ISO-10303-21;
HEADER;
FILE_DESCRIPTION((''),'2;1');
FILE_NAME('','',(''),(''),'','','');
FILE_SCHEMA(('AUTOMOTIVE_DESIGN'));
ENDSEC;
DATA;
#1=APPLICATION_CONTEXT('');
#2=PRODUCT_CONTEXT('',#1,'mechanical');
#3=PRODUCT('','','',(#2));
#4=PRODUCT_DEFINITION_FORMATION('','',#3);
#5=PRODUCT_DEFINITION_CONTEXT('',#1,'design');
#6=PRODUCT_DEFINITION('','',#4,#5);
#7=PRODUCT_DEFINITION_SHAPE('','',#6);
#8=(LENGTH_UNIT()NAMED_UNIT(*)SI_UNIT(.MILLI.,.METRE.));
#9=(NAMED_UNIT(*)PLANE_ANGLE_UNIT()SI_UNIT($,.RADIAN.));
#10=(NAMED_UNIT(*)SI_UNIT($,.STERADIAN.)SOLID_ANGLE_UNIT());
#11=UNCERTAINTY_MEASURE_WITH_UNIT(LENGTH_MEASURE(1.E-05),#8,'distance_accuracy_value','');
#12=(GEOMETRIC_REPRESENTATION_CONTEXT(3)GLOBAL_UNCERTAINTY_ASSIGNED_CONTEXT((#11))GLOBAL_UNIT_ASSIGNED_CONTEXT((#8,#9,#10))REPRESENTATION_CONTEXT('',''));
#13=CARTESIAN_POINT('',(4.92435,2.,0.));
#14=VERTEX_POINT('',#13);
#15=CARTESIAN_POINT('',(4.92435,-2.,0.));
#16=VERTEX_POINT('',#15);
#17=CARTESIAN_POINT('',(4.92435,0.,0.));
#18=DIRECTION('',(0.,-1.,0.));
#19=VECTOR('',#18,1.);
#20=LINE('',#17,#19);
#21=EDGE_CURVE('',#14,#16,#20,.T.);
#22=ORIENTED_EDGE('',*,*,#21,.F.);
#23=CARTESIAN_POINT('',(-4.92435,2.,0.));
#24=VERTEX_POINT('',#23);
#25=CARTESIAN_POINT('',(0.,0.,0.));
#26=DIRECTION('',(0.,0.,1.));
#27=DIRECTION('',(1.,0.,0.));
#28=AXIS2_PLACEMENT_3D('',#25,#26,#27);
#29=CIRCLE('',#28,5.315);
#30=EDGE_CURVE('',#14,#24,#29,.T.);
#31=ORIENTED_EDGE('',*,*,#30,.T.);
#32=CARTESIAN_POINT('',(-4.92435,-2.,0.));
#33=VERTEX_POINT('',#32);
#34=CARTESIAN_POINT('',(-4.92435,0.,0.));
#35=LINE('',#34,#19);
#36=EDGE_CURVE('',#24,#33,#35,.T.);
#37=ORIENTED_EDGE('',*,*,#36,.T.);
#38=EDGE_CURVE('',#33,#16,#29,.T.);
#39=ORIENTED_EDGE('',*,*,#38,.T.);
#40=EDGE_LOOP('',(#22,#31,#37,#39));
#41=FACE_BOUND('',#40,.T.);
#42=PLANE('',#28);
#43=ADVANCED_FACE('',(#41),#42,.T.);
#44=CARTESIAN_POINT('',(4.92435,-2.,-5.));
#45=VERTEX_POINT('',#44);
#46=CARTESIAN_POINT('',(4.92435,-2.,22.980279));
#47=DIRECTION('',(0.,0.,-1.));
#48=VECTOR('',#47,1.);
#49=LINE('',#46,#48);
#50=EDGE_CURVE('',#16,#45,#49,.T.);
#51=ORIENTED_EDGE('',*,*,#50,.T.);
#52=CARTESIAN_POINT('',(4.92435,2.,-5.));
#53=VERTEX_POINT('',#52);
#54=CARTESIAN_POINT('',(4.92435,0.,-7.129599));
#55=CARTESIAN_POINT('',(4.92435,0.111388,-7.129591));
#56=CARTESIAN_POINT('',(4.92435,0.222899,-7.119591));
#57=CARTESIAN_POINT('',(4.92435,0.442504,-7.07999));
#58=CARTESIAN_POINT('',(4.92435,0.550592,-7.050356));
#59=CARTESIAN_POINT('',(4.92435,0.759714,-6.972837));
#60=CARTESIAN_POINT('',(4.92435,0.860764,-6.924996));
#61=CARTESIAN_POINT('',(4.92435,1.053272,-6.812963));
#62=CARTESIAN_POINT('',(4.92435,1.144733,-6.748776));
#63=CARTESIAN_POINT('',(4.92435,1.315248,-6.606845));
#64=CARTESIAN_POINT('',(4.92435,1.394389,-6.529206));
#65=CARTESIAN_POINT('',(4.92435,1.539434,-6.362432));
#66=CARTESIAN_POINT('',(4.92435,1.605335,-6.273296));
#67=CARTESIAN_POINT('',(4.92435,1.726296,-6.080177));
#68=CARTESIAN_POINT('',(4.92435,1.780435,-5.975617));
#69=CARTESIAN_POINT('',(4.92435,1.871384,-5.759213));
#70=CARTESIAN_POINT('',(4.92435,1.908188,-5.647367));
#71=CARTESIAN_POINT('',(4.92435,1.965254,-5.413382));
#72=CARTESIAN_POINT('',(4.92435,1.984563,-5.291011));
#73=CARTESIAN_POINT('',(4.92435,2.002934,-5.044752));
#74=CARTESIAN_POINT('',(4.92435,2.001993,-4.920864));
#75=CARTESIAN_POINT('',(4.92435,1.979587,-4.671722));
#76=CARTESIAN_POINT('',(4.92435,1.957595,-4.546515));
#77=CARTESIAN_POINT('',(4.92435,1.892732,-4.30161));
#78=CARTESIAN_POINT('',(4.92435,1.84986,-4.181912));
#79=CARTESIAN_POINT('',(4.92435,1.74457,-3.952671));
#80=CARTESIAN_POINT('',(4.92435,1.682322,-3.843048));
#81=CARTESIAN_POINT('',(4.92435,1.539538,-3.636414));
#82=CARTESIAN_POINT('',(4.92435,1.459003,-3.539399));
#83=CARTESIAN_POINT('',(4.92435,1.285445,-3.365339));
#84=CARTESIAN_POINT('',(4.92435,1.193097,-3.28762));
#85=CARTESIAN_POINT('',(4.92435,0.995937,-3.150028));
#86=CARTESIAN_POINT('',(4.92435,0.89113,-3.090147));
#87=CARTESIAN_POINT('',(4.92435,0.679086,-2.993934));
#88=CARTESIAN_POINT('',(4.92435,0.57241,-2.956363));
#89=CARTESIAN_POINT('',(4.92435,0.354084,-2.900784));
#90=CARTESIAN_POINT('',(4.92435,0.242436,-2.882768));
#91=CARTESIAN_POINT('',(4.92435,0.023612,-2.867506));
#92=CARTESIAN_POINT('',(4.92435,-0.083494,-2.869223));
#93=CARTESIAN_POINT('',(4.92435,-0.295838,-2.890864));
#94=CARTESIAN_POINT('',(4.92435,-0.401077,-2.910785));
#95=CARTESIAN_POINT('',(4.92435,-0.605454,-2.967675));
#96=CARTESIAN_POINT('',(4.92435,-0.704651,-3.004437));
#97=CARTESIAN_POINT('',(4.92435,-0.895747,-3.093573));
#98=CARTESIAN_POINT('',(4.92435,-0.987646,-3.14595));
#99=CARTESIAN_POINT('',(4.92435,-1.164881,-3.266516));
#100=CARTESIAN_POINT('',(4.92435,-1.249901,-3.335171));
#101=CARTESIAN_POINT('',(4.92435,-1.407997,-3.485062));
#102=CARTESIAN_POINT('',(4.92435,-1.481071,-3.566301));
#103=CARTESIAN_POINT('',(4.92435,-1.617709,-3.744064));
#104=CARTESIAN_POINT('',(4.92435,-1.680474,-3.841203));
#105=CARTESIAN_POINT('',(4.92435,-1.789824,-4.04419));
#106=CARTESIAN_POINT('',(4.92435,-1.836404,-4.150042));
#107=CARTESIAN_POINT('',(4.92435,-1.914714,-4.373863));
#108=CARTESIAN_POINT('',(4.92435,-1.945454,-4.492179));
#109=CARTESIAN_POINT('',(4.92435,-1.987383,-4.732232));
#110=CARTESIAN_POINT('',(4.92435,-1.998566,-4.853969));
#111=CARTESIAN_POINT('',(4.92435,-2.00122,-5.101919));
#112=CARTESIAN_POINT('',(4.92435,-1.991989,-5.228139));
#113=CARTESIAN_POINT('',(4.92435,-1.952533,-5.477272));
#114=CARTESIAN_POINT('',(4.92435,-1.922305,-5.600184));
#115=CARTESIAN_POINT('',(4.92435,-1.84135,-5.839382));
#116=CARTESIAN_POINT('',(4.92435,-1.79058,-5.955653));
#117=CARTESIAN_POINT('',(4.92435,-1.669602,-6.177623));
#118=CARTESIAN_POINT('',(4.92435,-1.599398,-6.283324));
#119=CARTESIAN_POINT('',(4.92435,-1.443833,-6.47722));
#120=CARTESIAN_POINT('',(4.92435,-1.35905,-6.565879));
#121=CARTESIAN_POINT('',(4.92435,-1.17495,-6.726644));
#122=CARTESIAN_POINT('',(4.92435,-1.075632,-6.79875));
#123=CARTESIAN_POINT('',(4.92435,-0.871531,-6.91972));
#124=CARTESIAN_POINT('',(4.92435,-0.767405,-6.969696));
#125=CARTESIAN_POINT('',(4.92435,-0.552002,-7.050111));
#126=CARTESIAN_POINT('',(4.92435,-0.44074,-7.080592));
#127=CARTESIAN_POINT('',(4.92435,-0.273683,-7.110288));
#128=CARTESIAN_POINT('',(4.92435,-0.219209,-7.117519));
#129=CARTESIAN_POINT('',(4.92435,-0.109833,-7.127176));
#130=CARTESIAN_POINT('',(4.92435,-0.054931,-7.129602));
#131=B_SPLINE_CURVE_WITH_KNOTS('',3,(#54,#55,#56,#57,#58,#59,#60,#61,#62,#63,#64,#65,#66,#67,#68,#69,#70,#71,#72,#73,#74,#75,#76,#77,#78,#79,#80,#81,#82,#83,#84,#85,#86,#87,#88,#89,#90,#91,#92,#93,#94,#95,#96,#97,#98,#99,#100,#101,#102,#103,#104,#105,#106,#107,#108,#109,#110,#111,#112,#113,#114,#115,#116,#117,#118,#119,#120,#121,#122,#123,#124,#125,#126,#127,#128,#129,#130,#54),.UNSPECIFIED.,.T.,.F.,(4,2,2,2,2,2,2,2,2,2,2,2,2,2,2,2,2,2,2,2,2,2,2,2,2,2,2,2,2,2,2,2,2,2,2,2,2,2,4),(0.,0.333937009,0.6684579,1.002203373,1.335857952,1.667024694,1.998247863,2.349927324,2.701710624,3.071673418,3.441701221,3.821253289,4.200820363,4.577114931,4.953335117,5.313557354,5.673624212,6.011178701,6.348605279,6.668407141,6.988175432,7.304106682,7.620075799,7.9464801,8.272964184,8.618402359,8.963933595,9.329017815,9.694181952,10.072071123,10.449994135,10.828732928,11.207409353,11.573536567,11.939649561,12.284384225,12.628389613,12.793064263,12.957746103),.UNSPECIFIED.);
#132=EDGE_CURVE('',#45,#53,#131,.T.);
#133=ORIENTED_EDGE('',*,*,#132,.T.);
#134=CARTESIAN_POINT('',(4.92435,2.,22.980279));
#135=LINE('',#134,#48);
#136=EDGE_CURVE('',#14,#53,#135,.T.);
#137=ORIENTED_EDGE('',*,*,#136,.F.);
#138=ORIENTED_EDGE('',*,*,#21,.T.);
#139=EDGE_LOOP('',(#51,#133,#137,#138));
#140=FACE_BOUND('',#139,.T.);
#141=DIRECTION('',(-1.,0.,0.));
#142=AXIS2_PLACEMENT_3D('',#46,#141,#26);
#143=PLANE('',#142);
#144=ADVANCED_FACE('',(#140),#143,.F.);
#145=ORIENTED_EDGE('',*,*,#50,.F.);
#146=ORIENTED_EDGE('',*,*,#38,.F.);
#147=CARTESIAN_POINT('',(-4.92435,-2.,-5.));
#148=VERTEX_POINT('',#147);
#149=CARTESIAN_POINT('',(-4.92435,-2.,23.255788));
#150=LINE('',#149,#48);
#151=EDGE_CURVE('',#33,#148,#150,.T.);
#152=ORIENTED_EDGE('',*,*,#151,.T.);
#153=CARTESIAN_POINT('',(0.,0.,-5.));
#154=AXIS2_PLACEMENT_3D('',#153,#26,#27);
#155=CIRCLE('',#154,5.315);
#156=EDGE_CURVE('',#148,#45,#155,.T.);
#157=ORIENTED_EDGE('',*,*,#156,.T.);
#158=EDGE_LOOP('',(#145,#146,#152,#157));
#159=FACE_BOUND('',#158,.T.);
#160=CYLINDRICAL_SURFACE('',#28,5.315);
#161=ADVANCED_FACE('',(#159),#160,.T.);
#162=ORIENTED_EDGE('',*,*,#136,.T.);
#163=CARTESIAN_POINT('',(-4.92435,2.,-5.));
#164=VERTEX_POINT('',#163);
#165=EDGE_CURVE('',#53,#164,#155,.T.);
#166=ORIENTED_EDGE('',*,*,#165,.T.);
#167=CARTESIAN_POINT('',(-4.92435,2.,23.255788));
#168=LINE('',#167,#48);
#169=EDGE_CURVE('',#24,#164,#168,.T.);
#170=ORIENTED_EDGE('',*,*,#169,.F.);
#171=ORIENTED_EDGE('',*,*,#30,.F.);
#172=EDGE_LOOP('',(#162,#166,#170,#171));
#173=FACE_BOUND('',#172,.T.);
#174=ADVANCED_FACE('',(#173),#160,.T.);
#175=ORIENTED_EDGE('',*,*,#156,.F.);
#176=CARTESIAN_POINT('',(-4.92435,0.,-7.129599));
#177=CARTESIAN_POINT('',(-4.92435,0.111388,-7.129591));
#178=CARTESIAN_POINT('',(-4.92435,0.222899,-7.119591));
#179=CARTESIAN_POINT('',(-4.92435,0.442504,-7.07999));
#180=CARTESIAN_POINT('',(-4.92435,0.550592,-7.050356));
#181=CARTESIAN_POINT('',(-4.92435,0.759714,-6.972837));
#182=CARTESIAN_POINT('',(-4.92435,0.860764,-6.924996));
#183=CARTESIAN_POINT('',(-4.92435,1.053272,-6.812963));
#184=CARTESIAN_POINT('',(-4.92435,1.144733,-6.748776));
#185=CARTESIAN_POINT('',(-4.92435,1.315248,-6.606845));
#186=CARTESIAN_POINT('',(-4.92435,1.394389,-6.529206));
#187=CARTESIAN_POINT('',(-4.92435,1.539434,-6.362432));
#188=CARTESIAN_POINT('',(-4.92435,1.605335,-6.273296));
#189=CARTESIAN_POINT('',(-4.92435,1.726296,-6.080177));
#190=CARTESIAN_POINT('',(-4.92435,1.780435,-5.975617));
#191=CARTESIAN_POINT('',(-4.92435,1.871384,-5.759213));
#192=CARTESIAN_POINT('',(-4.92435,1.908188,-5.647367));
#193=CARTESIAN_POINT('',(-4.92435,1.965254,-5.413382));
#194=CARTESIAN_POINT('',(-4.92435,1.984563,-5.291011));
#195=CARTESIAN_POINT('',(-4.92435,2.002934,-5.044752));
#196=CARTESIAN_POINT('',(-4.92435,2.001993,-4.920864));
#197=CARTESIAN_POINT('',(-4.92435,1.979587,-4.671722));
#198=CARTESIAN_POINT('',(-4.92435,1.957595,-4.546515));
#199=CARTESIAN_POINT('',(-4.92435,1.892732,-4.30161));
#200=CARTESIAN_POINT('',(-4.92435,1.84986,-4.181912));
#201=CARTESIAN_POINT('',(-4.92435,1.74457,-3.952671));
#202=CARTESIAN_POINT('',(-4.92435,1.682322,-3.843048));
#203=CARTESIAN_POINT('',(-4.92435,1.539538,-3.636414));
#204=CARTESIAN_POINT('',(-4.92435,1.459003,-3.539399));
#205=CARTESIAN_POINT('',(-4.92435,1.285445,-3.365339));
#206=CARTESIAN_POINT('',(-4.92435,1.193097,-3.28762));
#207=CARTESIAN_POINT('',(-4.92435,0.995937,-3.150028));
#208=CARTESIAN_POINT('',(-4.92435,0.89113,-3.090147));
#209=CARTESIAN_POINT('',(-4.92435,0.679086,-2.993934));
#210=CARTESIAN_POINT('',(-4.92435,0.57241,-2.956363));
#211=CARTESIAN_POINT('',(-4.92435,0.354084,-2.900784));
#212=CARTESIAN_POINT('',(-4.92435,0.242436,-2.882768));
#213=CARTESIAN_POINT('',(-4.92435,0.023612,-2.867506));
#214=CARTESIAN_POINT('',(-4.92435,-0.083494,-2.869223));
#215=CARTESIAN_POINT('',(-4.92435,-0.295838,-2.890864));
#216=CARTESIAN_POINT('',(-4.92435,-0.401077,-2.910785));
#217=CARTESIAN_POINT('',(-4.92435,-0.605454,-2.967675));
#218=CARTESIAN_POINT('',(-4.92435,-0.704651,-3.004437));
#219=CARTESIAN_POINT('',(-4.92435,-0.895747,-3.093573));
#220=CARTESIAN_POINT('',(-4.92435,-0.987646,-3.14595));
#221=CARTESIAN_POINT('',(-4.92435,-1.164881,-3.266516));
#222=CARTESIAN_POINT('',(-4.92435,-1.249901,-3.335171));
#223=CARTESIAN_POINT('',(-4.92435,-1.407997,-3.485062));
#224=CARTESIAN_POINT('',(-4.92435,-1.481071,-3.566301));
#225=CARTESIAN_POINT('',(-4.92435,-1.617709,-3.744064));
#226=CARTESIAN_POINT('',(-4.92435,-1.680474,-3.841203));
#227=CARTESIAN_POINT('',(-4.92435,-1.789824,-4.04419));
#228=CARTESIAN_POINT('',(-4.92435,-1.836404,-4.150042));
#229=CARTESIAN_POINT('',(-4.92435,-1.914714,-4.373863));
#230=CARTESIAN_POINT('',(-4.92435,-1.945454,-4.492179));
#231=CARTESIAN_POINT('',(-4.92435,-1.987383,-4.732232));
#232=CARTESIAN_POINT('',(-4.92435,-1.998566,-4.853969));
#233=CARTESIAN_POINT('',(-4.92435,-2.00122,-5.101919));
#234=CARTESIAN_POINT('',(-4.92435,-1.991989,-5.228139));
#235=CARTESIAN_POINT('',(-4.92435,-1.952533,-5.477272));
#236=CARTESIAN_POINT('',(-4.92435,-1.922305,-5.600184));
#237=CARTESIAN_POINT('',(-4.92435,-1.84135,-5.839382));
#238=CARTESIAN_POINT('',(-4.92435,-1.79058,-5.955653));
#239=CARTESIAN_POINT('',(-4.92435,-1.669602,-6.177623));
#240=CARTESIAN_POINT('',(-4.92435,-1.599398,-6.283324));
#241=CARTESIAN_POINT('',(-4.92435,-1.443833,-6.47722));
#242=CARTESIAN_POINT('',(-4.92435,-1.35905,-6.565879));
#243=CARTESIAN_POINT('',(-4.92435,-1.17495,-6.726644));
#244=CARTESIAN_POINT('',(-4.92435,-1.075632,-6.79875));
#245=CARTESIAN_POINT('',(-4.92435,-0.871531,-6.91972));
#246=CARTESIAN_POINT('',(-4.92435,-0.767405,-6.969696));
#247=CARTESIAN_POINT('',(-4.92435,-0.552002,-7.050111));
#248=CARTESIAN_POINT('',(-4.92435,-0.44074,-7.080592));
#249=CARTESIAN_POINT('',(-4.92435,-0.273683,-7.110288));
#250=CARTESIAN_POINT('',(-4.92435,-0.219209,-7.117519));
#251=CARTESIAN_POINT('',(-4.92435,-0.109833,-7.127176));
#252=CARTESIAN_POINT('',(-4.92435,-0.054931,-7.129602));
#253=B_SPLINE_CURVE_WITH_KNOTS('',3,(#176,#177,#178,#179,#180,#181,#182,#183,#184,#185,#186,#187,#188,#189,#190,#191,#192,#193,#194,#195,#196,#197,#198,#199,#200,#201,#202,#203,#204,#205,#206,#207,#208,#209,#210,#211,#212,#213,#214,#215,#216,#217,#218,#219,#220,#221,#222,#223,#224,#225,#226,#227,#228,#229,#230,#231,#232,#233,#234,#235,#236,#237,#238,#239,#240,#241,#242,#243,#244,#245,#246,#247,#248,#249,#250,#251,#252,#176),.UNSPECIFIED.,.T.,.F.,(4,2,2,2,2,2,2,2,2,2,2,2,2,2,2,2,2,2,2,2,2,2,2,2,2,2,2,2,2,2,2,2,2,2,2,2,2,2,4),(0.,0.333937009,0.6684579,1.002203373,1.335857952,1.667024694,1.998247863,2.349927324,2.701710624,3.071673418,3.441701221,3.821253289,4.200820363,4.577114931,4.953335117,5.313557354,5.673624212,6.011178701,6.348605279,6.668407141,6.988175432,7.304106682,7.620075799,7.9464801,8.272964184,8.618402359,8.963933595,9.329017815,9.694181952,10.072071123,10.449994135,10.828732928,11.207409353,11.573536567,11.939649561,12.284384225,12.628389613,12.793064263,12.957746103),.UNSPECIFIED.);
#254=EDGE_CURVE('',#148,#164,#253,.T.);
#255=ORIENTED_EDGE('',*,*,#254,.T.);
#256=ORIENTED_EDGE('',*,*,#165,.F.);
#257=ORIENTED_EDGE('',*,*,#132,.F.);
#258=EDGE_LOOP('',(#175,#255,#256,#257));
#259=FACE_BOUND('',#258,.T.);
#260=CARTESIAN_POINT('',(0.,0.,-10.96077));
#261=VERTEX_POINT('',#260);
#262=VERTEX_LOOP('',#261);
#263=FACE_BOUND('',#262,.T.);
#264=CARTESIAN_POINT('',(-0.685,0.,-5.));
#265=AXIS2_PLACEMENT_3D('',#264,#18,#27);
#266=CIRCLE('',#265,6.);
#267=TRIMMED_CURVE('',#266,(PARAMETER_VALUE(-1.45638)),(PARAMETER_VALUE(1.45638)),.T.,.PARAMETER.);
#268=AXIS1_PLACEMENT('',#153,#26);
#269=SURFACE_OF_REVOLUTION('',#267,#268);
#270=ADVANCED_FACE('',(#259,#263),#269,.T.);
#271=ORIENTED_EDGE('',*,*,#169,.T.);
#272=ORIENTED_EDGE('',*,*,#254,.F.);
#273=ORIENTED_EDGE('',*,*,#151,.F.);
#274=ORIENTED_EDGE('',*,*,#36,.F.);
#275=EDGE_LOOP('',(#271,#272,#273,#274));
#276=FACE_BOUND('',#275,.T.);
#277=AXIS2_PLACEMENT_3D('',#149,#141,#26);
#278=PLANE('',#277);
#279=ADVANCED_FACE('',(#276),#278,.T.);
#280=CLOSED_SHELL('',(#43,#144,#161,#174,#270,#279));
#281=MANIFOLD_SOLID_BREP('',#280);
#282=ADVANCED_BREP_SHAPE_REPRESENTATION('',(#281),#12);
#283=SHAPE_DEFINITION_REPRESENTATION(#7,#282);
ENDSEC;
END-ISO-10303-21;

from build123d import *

# Parameters (mm, degrees)
CUT_EXTRUDE2_DEPTH      = 14.290482533
CUT_EXTRUDE2_DEPTH_BACK = 14.290482533
CUT_EXTRUDE4_DEPTH      = 14.290482533
CUT_EXTRUDE4_DEPTH_BACK = 14.290482533


with BuildPart() as part:
    # Sketch1 → Revolve2 (revolve)
    with BuildSketch(Plane(origin=(0, 0, 0), x_dir=(1, 0, 0), z_dir=(0, 1, 0))):
        with BuildLine():
            Line((0, 0), (5.315, 0))
            Line((5.315, 0), (5.315, 5))
            ThreePointArc((5.315, 5), (3.79328092, 8.993119082), (0, 10.960769665))
            Line((0, 10.960769665), (0, 0))
        make_face()
    revolve(axis=Axis((0, 0, 0), (0, 0, -1)))

    # Sketch3 → Cut-Extrude2 (cut, two sides: drawn at the far end of the back side and taken through both)
    with BuildSketch(Plane.XY.offset(-CUT_EXTRUDE2_DEPTH_BACK)):
        Polygon((-4.924350211, -37.167719106), (-4.924350211, -2), (-4.924350211, 2), (-4.924350211, 37.167719106), (-75.259788424, 37.167719106), (-75.259788424, -37.167719106), align=None)
    extrude(amount=CUT_EXTRUDE2_DEPTH + CUT_EXTRUDE2_DEPTH_BACK, mode=Mode.SUBTRACT)

    # Sketch4 → Cut-Extrude4 (cut, two sides: drawn at the far end of the back side and taken through both)
    with BuildSketch(Plane.XY.offset(-CUT_EXTRUDE4_DEPTH_BACK)):
        Polygon((4.924350211, -37.167719106), (4.924350211, -2), (4.924350211, 2), (4.924350211, 37.167719106), (75.259788424, 37.167719106), (75.259788424, -37.167719106), align=None)
    extrude(amount=CUT_EXTRUDE4_DEPTH + CUT_EXTRUDE4_DEPTH_BACK, mode=Mode.SUBTRACT)


solid = part.part
